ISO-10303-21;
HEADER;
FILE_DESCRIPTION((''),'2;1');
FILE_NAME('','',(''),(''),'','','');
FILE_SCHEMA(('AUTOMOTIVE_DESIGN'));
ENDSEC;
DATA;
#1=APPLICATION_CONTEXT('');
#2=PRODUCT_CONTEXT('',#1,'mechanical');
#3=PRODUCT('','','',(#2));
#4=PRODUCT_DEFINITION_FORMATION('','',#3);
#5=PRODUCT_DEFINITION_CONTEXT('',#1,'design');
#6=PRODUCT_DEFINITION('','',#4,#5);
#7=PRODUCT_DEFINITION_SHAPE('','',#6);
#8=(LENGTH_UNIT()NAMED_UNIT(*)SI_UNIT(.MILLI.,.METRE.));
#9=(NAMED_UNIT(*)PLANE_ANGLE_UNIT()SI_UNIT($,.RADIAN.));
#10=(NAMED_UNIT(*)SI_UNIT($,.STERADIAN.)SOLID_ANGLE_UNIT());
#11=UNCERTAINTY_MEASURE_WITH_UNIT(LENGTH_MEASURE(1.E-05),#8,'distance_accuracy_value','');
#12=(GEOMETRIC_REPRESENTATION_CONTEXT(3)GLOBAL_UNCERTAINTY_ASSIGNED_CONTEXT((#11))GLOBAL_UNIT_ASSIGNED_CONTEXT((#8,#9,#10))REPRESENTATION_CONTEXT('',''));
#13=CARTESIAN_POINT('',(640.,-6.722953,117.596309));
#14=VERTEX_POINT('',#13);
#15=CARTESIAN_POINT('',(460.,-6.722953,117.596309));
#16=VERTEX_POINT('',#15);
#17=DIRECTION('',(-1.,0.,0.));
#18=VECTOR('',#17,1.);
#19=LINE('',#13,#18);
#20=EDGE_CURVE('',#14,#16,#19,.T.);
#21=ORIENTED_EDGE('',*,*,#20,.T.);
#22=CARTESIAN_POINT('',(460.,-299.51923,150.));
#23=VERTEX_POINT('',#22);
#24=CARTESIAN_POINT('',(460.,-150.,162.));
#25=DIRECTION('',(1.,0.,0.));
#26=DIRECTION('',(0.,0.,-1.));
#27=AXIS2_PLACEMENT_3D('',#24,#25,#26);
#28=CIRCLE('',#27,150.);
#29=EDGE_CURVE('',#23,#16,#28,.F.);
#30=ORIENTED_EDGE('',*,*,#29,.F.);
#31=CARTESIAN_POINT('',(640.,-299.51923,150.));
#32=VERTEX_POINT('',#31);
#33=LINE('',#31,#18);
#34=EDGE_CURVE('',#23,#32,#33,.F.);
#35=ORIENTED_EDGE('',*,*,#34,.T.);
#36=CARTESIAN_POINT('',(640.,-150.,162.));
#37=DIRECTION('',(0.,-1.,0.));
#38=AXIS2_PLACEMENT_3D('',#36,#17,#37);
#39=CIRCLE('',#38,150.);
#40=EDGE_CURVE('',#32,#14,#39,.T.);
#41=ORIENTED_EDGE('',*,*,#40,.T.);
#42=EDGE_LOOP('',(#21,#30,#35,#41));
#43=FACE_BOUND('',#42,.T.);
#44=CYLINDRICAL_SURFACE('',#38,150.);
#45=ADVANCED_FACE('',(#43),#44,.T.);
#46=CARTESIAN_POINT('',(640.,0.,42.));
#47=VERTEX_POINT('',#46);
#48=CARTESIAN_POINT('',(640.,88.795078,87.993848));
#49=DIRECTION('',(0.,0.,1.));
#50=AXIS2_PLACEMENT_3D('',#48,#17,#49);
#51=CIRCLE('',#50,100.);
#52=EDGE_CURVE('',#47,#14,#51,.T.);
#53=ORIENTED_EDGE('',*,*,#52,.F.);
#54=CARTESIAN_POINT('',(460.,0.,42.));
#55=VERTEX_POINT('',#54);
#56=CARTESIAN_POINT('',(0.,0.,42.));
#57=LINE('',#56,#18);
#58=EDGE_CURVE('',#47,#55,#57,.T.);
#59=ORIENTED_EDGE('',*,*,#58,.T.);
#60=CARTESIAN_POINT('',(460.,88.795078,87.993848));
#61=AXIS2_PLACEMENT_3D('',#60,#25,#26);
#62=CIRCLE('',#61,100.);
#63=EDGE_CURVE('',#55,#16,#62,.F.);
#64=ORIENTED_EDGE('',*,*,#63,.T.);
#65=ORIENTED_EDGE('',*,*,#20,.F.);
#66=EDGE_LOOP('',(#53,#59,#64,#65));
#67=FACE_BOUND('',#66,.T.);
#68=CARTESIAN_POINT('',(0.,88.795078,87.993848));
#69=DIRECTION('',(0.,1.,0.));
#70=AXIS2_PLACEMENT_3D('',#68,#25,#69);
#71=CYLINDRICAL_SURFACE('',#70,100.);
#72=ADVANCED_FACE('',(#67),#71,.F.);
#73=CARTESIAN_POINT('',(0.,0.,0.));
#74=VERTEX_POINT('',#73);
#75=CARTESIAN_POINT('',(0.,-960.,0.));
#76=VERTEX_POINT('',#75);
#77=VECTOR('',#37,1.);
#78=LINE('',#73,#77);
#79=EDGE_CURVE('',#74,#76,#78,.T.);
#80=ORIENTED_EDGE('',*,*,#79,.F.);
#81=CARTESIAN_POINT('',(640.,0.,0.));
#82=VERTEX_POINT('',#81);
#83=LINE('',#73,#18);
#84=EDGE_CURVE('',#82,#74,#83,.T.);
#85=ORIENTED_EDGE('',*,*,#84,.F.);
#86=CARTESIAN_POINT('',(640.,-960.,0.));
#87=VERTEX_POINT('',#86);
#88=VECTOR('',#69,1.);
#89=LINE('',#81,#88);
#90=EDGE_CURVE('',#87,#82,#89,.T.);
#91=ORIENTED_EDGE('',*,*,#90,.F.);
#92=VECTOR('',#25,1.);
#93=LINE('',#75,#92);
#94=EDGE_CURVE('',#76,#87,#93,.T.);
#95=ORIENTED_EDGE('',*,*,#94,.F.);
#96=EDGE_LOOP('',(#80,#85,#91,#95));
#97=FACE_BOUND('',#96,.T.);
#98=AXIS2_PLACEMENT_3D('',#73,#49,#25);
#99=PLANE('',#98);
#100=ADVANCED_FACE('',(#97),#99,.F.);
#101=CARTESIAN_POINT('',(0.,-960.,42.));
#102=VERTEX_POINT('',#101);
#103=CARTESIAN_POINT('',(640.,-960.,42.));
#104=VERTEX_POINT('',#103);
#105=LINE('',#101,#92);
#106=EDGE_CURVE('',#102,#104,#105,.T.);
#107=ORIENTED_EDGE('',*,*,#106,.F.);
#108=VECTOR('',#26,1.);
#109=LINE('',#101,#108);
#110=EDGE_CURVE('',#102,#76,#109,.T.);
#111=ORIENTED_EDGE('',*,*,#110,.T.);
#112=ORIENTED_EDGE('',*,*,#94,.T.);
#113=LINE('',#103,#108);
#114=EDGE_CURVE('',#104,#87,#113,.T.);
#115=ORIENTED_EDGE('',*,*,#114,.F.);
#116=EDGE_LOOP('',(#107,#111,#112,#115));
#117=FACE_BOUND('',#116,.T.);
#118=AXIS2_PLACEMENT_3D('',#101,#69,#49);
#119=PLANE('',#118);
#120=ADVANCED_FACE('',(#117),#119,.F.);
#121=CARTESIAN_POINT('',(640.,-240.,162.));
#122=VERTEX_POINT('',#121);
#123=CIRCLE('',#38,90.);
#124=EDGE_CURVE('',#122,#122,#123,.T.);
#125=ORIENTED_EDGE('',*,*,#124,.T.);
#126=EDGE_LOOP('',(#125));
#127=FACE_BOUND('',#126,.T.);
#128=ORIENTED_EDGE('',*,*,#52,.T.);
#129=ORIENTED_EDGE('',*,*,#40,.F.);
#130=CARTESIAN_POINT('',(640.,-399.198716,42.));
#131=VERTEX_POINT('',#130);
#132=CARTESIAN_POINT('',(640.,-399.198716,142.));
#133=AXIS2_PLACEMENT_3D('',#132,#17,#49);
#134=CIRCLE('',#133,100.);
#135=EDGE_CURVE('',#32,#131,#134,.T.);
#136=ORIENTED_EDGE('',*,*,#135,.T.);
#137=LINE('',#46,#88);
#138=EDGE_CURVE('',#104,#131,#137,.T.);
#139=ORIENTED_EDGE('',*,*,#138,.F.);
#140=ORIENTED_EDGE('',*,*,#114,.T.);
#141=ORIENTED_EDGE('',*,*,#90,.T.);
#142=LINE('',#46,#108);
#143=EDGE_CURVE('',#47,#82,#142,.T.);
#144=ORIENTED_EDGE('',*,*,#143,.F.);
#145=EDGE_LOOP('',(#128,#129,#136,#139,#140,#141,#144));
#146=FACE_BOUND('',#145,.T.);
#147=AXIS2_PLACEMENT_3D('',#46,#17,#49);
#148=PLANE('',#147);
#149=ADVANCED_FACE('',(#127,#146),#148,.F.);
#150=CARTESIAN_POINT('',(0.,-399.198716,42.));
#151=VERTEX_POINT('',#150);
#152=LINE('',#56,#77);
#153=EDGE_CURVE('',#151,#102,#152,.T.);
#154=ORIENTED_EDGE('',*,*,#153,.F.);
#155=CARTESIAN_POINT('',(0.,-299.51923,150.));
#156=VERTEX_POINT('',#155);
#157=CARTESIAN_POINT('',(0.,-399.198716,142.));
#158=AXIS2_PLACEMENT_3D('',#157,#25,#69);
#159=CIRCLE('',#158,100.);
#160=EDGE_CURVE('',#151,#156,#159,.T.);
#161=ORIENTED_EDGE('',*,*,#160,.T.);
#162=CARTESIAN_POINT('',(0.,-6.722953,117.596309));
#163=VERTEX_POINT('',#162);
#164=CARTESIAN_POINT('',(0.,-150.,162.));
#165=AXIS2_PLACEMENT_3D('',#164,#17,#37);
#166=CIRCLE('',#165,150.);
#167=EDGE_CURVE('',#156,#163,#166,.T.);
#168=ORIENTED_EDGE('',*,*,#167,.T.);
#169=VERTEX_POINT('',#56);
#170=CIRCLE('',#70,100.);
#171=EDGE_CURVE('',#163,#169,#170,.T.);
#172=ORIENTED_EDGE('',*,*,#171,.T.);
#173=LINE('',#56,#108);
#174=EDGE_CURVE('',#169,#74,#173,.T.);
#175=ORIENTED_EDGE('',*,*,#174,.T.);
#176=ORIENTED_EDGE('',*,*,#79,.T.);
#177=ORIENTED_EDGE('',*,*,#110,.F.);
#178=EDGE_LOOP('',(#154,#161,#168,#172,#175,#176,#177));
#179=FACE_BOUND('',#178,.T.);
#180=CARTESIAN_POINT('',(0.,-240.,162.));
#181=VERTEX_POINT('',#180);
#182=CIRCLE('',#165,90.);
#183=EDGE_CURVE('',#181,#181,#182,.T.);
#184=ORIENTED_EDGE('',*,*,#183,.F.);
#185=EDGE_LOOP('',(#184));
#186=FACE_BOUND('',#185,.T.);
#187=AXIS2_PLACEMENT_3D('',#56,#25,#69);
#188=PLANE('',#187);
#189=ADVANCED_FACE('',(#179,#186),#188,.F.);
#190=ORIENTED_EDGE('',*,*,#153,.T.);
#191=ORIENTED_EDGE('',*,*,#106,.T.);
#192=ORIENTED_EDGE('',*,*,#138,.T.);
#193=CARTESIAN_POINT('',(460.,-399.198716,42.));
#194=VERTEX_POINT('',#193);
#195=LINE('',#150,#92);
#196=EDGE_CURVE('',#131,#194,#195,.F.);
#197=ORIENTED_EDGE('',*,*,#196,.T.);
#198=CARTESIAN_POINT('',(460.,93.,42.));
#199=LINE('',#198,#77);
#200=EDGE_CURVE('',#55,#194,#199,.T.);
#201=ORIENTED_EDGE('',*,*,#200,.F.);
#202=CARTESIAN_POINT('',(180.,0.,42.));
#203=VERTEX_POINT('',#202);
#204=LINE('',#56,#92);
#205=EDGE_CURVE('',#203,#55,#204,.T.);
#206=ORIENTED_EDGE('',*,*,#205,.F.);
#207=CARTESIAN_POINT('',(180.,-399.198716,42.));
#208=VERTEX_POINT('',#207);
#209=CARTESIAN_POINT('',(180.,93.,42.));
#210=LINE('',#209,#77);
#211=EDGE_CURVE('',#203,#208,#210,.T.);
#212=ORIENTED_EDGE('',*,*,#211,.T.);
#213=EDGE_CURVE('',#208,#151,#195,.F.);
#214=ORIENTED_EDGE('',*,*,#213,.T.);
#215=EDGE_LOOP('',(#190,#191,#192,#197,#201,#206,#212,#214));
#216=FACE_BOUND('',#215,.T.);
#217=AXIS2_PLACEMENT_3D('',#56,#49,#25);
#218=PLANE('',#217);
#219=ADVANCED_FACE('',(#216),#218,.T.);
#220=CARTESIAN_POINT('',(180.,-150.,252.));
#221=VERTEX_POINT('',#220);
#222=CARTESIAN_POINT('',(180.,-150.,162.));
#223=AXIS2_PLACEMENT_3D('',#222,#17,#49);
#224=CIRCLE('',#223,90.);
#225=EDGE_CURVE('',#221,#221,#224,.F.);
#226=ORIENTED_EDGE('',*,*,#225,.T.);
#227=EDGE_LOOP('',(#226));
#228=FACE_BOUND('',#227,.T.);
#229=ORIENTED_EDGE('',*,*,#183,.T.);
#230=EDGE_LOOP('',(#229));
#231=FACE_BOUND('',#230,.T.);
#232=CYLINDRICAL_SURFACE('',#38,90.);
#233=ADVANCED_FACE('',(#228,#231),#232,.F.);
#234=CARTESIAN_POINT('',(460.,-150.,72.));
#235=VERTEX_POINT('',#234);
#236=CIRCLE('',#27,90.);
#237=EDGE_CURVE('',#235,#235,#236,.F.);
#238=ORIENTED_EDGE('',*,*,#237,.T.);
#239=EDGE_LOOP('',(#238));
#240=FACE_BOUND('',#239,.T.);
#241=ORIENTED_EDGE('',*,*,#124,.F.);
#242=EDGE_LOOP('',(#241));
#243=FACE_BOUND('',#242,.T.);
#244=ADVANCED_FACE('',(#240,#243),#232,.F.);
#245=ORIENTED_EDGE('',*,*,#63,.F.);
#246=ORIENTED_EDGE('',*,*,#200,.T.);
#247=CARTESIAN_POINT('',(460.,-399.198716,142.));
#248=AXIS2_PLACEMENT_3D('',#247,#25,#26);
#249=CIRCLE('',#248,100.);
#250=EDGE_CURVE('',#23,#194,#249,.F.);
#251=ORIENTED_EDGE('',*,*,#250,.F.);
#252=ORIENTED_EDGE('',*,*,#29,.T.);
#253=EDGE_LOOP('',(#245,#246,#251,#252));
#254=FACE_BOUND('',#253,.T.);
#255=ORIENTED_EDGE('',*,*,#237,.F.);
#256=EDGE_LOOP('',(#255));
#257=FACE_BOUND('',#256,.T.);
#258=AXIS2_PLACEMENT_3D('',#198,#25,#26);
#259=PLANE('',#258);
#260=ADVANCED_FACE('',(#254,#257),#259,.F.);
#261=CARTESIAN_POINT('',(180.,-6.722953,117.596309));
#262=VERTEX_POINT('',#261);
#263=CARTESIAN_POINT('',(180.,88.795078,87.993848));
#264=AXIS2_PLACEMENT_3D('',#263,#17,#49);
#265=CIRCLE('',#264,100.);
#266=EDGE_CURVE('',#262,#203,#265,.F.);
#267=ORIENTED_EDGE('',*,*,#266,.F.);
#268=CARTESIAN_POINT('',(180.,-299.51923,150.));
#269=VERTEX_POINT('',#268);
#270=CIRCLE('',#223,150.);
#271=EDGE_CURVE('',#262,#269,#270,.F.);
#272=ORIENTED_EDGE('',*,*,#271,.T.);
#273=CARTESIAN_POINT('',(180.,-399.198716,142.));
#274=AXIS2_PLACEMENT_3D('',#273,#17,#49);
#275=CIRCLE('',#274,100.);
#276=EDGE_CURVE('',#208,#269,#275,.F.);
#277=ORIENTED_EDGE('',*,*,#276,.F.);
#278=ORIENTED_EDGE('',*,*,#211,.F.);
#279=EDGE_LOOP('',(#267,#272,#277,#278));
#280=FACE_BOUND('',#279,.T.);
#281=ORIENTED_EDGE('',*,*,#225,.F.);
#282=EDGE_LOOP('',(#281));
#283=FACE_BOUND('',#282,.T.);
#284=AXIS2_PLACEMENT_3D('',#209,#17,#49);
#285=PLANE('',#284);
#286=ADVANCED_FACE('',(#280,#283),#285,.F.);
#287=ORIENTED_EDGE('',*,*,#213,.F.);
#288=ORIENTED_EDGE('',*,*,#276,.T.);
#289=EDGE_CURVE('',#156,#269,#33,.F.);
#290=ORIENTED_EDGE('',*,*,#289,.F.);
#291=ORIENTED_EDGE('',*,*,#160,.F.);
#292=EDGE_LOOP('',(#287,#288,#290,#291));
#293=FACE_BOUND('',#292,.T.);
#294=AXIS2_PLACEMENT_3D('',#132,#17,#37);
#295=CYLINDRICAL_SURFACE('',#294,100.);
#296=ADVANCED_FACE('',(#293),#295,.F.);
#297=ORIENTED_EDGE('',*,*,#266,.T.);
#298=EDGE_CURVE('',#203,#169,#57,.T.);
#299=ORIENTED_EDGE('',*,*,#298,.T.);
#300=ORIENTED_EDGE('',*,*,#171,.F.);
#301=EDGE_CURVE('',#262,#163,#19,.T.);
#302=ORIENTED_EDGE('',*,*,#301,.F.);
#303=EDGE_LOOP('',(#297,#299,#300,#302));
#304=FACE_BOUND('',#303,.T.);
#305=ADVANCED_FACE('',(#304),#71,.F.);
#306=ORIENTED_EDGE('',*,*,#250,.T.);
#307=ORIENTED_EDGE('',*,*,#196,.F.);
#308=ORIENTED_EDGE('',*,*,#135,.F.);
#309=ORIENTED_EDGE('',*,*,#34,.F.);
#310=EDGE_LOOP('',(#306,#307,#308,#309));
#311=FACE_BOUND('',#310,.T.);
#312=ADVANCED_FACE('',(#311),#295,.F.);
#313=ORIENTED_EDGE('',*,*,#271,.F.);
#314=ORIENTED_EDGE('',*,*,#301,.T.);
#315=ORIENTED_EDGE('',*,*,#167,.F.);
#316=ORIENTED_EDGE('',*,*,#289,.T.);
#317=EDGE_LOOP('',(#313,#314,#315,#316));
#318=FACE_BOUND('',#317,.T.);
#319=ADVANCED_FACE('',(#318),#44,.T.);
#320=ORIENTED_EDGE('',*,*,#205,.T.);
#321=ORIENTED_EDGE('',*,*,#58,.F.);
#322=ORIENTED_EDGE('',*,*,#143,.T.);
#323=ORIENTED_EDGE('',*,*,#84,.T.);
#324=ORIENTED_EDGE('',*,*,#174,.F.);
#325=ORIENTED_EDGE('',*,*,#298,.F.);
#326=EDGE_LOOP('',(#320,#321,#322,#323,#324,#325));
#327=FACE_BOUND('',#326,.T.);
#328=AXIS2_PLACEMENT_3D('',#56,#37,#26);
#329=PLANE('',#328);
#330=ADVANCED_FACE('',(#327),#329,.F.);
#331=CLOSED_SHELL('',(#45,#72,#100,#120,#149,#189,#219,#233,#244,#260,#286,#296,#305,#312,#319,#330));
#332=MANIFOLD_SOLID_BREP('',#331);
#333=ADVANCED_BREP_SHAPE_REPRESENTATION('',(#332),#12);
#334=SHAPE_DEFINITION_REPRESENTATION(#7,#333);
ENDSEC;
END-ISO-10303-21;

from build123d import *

# Parameters (mm, degrees)
SKETCH1_W           = 640
SKETCH1_H           = 960
BOSS_EXTRUDE1_DEPTH = 42
SKETCH2_R           = 150
SKETCH2_R_2         = 90
BOSS_EXTRUDE2_DEPTH = 640
FILLET1_R           = 100
SKETCH3_W           = 280
SKETCH3_H           = 331.142467373
CUT_EXTRUDE1_DEPTH  = 1053


with BuildPart() as part:
    # Sketch1 → Boss-Extrude1 (new body)
    with BuildSketch(Plane.XY):
        with Locations((320, -480)):
            Rectangle(SKETCH1_W, SKETCH1_H)
    extrude(amount=BOSS_EXTRUDE1_DEPTH)

    # Sketch2 → Boss-Extrude2 (add)
    with BuildSketch(Plane.ZY):
        with Locations((162, -150)):
            Circle(SKETCH2_R)
        with Locations(Location((162, -150, 0), (0, 0, 270))):
            Circle(SKETCH2_R_2, mode=Mode.SUBTRACT)
    extrude(amount=-BOSS_EXTRUDE2_DEPTH)

    # Fillet1
    # the kernel refuses this fillet: 100 mm, written as the material it adds along each edge
    with BuildSketch(Plane(origin=(640, -240, 42), x_dir=(0, -0.48266089642206267, 0.8758073184582617), z_dir=(-1, 0, 0))) as fillet1_piece_1:
        with BuildLine():
            CenterArc((164.419726765, -91.161310821), FILLET1_R, 114.270768309, 94.588565736)
            Line((76.83899492, -139.427400463), (75.087380283, -140.392722256))
            Line((75.087380283, -140.392722256), (-1.751614637, -0.965321793))
            Line((-1.751614637, -0.965321793), (0.822098634, 1.823226216))
            ThreePointArc((0.822098634, 1.823226216), (61.657397537, -11.258033768), (122.49269644, 1.823226216))
            Line((122.49269644, 1.823226216), (123.314795074, 0))
        make_face()
    extrude(amount=640)
    with BuildSketch(Plane(origin=(640, -60, 42), x_dir=(0, 1, 0), z_dir=(-1, 0, 0))) as fillet1_piece_2:
        with BuildLine():
            CenterArc((148.795078393, -45.993847992), FILLET1_R, 152.616862204, 44.602125316)
            Line((53.277047036, -75.596308795), (51.366686409, -76.188358011))
            ThreePointArc((51.366686409, -76.188358011), (30.975334969, -34.741755066), (-1.2, -1.6))
            Line((-1.2, -1.6), (0, 2))
            ThreePointArc((0, 2), (30, 2), (58.224098432, 0.91987696))
            Line((58.224098432, 0.91987696), (60, 0))
        make_face()
    extrude(amount=640)

    # Sketch3 → Cut-Extrude1 (cut)
    with BuildSketch(Plane.XZ.offset(960)):
        with Locations((320, 207.571233687)):
            Rectangle(SKETCH3_W, SKETCH3_H)
    extrude(amount=-CUT_EXTRUDE1_DEPTH, mode=Mode.SUBTRACT)


solid = part.part
